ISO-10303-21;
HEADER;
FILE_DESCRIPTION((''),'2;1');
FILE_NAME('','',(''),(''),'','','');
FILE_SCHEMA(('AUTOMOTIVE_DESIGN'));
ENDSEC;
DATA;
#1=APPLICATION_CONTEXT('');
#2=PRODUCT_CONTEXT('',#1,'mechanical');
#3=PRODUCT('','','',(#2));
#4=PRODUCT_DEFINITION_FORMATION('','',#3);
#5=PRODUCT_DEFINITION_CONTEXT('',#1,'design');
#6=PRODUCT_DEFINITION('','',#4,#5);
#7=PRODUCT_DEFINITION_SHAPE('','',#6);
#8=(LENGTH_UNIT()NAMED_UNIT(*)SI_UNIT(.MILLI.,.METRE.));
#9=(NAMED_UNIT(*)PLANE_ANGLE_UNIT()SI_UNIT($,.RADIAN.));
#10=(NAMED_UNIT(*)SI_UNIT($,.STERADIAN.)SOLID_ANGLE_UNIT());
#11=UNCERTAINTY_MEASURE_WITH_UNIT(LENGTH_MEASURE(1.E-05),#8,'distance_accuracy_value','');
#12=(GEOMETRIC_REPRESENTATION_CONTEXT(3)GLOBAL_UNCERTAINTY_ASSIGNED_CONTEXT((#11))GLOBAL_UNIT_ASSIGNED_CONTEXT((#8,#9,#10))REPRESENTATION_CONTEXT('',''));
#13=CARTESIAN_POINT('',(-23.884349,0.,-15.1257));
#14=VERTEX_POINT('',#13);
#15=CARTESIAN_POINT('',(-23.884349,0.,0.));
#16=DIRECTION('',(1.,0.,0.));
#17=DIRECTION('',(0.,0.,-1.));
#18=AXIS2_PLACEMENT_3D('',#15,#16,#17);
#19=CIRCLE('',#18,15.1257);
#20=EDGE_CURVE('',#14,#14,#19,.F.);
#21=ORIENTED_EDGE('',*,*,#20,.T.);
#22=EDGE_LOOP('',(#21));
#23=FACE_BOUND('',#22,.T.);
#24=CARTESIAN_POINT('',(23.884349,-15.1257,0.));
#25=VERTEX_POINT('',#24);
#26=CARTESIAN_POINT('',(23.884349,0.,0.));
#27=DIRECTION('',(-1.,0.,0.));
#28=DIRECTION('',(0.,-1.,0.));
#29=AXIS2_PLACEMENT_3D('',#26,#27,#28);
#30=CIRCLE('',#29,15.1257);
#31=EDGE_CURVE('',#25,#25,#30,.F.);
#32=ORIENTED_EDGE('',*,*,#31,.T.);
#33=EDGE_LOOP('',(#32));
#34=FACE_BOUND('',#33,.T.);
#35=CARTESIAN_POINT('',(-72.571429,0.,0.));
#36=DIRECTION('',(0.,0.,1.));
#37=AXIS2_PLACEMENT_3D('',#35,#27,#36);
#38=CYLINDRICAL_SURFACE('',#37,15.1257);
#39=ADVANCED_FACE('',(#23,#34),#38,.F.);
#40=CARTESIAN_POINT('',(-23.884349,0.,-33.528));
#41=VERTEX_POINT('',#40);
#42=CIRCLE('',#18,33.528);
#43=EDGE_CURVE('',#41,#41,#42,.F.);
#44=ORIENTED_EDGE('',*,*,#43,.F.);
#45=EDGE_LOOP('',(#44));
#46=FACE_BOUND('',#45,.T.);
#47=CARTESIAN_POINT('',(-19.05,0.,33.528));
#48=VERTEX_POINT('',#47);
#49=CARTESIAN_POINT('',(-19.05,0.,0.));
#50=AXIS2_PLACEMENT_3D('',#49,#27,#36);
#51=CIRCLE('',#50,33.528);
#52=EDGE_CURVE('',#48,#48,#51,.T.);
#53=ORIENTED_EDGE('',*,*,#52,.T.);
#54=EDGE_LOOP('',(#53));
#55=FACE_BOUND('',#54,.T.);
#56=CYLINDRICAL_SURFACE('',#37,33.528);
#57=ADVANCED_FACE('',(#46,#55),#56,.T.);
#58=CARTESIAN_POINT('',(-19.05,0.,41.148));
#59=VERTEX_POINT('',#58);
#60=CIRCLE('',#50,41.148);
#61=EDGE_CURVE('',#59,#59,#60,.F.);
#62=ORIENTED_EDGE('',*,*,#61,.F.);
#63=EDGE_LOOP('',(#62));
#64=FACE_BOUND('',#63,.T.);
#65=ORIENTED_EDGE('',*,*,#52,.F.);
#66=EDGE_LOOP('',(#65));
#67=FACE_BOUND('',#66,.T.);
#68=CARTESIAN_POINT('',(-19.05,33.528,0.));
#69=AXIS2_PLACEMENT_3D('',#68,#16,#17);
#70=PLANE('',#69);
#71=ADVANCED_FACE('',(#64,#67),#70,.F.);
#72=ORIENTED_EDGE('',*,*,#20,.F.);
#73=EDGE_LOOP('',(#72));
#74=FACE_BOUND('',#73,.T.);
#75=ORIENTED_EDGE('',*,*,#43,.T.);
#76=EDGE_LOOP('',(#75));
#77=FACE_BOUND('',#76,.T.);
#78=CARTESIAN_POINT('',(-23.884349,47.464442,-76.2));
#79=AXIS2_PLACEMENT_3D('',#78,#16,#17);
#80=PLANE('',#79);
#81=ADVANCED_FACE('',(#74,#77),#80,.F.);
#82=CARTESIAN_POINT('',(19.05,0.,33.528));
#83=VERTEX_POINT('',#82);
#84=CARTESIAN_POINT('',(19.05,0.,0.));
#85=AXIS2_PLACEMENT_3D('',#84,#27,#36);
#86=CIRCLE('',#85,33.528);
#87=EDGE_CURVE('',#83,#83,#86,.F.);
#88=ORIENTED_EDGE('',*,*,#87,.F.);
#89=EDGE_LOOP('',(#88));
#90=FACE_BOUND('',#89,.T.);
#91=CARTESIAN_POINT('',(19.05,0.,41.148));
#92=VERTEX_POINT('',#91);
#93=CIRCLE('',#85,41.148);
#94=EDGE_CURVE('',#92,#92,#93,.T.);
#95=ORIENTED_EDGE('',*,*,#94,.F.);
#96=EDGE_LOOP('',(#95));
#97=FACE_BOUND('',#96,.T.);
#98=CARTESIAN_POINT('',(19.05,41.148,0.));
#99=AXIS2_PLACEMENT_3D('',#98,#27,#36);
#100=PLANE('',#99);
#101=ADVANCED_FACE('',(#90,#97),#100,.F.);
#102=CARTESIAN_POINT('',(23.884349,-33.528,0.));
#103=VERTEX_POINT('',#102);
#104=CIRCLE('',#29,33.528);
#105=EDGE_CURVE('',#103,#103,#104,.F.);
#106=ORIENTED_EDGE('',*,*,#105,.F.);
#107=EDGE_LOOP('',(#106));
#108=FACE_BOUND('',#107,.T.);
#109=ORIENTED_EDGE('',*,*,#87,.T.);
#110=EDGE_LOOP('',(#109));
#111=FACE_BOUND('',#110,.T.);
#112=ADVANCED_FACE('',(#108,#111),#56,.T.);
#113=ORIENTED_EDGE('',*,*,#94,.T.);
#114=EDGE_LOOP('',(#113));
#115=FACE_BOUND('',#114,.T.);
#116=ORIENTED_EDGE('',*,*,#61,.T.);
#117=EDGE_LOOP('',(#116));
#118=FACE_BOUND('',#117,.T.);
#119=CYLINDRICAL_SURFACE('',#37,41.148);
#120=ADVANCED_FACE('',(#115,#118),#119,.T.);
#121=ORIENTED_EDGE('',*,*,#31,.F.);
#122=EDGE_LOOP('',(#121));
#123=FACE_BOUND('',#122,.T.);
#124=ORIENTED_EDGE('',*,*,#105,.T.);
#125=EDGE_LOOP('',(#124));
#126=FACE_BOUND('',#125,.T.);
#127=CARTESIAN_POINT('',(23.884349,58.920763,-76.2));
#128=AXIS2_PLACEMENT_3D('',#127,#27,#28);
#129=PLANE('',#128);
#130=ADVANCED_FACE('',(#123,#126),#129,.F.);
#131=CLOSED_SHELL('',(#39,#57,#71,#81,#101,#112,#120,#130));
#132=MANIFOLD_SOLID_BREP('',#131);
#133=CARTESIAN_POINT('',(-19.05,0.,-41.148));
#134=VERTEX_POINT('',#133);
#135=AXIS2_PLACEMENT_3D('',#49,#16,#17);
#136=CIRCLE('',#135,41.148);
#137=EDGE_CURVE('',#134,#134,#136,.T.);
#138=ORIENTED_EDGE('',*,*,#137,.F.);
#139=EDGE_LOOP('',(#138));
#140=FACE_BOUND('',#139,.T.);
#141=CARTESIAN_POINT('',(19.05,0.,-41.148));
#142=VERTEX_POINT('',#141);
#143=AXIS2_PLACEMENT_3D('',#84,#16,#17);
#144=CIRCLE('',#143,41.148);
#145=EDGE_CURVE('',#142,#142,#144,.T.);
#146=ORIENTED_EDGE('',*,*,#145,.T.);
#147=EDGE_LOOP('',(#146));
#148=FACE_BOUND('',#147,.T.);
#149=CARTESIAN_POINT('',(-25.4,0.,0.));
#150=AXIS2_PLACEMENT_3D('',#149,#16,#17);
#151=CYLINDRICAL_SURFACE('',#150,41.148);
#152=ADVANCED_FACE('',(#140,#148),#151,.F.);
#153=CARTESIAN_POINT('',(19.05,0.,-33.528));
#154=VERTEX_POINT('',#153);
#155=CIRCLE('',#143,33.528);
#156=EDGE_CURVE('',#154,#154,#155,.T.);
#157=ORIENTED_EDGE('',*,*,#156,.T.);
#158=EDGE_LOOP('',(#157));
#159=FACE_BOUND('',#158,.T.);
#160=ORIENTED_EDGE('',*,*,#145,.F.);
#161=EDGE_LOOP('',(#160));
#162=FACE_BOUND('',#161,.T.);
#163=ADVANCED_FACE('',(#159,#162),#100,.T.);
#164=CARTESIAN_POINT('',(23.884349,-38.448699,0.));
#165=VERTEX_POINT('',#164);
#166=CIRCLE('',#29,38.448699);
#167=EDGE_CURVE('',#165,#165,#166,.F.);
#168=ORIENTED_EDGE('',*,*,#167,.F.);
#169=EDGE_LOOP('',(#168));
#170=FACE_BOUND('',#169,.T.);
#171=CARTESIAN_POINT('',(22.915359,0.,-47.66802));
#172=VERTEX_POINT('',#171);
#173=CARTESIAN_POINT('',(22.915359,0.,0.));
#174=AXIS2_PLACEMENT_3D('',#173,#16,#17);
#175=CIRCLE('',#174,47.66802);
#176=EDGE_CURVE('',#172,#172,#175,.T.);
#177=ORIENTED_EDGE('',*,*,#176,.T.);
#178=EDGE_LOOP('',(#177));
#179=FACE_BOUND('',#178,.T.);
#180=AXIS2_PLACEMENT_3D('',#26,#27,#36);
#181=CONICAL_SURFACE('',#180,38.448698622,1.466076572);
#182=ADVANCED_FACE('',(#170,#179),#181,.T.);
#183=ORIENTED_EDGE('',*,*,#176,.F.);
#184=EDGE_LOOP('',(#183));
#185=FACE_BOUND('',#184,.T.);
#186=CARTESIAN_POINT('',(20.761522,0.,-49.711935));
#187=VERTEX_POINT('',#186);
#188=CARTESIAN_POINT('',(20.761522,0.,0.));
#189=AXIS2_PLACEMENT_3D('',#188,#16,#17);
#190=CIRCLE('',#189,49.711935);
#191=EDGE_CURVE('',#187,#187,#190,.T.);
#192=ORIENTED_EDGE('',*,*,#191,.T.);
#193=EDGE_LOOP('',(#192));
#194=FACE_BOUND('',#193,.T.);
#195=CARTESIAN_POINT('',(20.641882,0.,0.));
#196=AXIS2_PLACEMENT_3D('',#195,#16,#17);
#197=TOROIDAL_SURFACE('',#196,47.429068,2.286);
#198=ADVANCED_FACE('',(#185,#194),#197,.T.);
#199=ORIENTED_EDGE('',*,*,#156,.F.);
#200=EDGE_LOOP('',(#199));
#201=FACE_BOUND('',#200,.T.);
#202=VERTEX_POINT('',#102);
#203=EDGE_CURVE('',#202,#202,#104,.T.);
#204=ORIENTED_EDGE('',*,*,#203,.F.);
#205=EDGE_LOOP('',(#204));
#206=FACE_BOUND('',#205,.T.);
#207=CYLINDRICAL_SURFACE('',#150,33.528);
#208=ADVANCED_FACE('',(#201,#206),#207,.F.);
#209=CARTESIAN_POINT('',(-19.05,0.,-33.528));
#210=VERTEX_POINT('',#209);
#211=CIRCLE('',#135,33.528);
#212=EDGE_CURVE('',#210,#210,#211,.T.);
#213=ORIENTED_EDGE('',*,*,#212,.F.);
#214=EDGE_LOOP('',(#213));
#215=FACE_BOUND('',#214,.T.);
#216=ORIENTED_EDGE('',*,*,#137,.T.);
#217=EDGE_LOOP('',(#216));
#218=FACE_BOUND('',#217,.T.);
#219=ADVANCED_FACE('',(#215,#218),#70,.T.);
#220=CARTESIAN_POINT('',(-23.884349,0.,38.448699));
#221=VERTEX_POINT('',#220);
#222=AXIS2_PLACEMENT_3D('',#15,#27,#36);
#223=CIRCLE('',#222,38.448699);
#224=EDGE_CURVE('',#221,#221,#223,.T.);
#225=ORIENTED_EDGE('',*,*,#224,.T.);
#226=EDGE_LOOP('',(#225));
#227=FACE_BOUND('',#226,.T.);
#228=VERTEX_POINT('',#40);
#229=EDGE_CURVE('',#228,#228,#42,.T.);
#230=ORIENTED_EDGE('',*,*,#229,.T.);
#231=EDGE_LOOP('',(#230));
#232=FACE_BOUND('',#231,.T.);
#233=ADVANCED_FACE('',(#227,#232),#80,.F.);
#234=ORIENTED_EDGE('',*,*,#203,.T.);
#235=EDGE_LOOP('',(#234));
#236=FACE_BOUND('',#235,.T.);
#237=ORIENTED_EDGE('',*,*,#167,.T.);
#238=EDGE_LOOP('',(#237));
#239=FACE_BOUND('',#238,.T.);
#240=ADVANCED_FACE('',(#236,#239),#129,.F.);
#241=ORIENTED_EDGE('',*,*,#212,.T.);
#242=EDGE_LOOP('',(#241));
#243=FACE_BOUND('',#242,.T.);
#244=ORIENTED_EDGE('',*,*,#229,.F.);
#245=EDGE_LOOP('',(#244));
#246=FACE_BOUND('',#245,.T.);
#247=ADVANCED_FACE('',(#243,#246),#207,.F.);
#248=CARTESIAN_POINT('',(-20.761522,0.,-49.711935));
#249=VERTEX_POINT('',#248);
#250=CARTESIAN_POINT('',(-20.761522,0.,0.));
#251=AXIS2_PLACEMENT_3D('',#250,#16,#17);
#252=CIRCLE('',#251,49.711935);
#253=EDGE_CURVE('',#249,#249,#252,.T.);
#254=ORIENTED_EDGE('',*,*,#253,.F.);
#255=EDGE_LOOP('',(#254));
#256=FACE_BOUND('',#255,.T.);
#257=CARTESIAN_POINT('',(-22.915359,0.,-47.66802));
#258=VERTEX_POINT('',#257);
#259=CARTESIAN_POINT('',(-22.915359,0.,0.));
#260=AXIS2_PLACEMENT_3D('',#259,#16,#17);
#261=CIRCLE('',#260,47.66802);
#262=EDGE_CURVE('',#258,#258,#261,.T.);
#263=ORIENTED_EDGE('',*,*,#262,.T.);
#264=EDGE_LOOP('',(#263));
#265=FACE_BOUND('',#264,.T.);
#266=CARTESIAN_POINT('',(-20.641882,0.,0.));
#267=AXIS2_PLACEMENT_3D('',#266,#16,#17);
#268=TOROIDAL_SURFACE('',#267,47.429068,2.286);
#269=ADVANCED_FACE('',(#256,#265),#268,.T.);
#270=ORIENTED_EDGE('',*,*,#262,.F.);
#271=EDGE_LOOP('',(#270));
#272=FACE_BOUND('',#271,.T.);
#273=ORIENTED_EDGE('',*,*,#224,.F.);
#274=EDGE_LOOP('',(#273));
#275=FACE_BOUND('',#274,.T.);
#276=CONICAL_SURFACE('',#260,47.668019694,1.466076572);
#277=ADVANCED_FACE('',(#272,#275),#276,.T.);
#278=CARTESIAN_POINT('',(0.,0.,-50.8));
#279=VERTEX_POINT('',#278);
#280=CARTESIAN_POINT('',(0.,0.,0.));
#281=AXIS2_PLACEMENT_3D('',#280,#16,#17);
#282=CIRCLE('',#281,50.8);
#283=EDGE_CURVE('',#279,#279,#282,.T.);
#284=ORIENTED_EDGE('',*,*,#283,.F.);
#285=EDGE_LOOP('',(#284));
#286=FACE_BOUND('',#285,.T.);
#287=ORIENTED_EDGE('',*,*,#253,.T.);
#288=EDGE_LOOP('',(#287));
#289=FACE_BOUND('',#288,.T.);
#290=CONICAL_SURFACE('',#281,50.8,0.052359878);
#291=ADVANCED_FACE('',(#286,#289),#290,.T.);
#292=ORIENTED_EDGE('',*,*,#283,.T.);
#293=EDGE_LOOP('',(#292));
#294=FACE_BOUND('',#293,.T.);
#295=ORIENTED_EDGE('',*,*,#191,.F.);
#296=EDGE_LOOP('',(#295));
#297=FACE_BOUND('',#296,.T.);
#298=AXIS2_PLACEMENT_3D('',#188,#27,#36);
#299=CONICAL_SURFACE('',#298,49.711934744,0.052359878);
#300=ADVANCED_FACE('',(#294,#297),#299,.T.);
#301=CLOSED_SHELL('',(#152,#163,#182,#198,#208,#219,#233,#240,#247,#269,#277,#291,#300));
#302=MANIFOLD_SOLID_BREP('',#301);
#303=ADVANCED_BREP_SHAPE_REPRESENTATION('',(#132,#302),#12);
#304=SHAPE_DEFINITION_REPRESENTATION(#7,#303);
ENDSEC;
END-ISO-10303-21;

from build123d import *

# Parameters (mm, degrees)
SKETCH3_W          = 17.199413367
SKETCH3_H          = 109.667546616
CUT_EXTRUDE4_DEPTH = 76.2


# Read off the part's stored shape, not the designer's step: Cut-Extrude3
with BuildPart() as part:
    # Sketch1 → Revolve1 (revolve)
    with BuildSketch(Plane.XY, mode=Mode.PRIVATE) as revolve1_sk:
        with BuildLine():
            Line((20.761521884, 49.711934744), (0, 50.8))
            Line((0, 50.8), (-20.761521884, 49.711934744))
            ThreePointArc((-20.761521884, 49.711934744), (-22.215460448, 49.087273439), (-22.915358941, 47.668019694))
            Line((-22.915358941, 47.668019694), (-23.884348631, 38.448698622))
            ThreePointArc((-23.884348631, 38.448698622), (-24.380244956, 37.475447286), (-25.4, 37.084))
            Line((-25.4, 37.084), (-25.4, 33.528))
            Line((-25.4, 33.528), (-19.05, 33.528))
            Line((-19.05, 33.528), (-19.05, 41.148))
            Line((-19.05, 41.148), (19.05, 41.148))
            Line((19.05, 41.148), (19.05, 33.528))
            Line((19.05, 33.528), (25.4, 33.528))
            Line((25.4, 33.528), (25.4, 37.084))
            ThreePointArc((25.4, 37.084), (24.380244956, 37.475447286), (23.884348631, 38.448698622))
            Line((23.884348631, 38.448698622), (22.915358941, 47.668019694))
            ThreePointArc((22.915358941, 47.668019694), (22.215460448, 49.087273439), (20.761521884, 49.711934744))
        make_face()
    revolve(revolve1_sk.sketch.rotate(Axis((-25.4, 0, 0), (1, 0, 0)), 270), axis=Axis((-25.4, 0, 0), (1, 0, 0)))

    # Cut-Extrude3 outline → Cut-Extrude3 (revolve, cut)
    with BuildSketch(Plane.YX):
        with BuildLine():
            Line((38.448698622, -23.884348631), (33.528, -23.884348631))
            Line((33.528, -23.884348631), (33.528, -25.4))
            Line((33.528, -25.4), (37.084, -25.4))
            ThreePointArc((37.084, -25.4), (37.475447286, -24.380244956), (38.448698622, -23.884348631))
        make_face()
    revolve(axis=Axis((0, 0, 0), (1, 0, 0)), mode=Mode.SUBTRACT)


with BuildPart() as body_2:
    # Cut-Extrude3 2 outline → Cut-Extrude3 2 (revolve)
    with BuildSketch(Plane.YX):
        with BuildLine():
            Line((26.416, 27.7749), (15.1257, 27.7749))
            Line((15.1257, 27.7749), (15.1257, -23.884348631))
            Line((15.1257, -23.884348631), (33.528, -23.884348631))
            Line((33.528, -23.884348631), (33.528, -19.05))
            Line((33.528, -19.05), (41.148, -19.05))
            Line((41.148, -19.05), (41.148, 19.05))
            Line((41.148, 19.05), (33.528, 19.05))
            Line((33.528, 19.05), (33.528, 25.4))
            Line((33.528, 25.4), (28.702, 25.4))
            Line((28.702, 25.4), (28.702, 25.4889))
            ThreePointArc((28.702, 25.4889), (28.032446102, 27.105346102), (26.416, 27.7749))
        make_face()
    revolve(axis=Axis((0, 0, 0), (1, 0, 0)))


with BuildPart() as cut_extrude4_tool:
    # Sketch3 → Cut-Extrude4 (new, symmetric)
    with BuildSketch(Plane.XY):
        with Locations((32.484055314, 4.086989315)):
            Rectangle(SKETCH3_W, SKETCH3_H)
    extrude(amount=CUT_EXTRUDE4_DEPTH, both=True)


with BuildPart() as part_1:
    add(part.part)

    # Cut-Extrude4: cut by cut_extrude4_tool
    add(cut_extrude4_tool.part, mode=Mode.SUBTRACT)


with BuildPart() as body_2_1:
    add(body_2.part)

    # Cut-Extrude4: cut by cut_extrude4_tool
    add(cut_extrude4_tool.part, mode=Mode.SUBTRACT)


solid = Compound([part_1.part, body_2_1.part])
